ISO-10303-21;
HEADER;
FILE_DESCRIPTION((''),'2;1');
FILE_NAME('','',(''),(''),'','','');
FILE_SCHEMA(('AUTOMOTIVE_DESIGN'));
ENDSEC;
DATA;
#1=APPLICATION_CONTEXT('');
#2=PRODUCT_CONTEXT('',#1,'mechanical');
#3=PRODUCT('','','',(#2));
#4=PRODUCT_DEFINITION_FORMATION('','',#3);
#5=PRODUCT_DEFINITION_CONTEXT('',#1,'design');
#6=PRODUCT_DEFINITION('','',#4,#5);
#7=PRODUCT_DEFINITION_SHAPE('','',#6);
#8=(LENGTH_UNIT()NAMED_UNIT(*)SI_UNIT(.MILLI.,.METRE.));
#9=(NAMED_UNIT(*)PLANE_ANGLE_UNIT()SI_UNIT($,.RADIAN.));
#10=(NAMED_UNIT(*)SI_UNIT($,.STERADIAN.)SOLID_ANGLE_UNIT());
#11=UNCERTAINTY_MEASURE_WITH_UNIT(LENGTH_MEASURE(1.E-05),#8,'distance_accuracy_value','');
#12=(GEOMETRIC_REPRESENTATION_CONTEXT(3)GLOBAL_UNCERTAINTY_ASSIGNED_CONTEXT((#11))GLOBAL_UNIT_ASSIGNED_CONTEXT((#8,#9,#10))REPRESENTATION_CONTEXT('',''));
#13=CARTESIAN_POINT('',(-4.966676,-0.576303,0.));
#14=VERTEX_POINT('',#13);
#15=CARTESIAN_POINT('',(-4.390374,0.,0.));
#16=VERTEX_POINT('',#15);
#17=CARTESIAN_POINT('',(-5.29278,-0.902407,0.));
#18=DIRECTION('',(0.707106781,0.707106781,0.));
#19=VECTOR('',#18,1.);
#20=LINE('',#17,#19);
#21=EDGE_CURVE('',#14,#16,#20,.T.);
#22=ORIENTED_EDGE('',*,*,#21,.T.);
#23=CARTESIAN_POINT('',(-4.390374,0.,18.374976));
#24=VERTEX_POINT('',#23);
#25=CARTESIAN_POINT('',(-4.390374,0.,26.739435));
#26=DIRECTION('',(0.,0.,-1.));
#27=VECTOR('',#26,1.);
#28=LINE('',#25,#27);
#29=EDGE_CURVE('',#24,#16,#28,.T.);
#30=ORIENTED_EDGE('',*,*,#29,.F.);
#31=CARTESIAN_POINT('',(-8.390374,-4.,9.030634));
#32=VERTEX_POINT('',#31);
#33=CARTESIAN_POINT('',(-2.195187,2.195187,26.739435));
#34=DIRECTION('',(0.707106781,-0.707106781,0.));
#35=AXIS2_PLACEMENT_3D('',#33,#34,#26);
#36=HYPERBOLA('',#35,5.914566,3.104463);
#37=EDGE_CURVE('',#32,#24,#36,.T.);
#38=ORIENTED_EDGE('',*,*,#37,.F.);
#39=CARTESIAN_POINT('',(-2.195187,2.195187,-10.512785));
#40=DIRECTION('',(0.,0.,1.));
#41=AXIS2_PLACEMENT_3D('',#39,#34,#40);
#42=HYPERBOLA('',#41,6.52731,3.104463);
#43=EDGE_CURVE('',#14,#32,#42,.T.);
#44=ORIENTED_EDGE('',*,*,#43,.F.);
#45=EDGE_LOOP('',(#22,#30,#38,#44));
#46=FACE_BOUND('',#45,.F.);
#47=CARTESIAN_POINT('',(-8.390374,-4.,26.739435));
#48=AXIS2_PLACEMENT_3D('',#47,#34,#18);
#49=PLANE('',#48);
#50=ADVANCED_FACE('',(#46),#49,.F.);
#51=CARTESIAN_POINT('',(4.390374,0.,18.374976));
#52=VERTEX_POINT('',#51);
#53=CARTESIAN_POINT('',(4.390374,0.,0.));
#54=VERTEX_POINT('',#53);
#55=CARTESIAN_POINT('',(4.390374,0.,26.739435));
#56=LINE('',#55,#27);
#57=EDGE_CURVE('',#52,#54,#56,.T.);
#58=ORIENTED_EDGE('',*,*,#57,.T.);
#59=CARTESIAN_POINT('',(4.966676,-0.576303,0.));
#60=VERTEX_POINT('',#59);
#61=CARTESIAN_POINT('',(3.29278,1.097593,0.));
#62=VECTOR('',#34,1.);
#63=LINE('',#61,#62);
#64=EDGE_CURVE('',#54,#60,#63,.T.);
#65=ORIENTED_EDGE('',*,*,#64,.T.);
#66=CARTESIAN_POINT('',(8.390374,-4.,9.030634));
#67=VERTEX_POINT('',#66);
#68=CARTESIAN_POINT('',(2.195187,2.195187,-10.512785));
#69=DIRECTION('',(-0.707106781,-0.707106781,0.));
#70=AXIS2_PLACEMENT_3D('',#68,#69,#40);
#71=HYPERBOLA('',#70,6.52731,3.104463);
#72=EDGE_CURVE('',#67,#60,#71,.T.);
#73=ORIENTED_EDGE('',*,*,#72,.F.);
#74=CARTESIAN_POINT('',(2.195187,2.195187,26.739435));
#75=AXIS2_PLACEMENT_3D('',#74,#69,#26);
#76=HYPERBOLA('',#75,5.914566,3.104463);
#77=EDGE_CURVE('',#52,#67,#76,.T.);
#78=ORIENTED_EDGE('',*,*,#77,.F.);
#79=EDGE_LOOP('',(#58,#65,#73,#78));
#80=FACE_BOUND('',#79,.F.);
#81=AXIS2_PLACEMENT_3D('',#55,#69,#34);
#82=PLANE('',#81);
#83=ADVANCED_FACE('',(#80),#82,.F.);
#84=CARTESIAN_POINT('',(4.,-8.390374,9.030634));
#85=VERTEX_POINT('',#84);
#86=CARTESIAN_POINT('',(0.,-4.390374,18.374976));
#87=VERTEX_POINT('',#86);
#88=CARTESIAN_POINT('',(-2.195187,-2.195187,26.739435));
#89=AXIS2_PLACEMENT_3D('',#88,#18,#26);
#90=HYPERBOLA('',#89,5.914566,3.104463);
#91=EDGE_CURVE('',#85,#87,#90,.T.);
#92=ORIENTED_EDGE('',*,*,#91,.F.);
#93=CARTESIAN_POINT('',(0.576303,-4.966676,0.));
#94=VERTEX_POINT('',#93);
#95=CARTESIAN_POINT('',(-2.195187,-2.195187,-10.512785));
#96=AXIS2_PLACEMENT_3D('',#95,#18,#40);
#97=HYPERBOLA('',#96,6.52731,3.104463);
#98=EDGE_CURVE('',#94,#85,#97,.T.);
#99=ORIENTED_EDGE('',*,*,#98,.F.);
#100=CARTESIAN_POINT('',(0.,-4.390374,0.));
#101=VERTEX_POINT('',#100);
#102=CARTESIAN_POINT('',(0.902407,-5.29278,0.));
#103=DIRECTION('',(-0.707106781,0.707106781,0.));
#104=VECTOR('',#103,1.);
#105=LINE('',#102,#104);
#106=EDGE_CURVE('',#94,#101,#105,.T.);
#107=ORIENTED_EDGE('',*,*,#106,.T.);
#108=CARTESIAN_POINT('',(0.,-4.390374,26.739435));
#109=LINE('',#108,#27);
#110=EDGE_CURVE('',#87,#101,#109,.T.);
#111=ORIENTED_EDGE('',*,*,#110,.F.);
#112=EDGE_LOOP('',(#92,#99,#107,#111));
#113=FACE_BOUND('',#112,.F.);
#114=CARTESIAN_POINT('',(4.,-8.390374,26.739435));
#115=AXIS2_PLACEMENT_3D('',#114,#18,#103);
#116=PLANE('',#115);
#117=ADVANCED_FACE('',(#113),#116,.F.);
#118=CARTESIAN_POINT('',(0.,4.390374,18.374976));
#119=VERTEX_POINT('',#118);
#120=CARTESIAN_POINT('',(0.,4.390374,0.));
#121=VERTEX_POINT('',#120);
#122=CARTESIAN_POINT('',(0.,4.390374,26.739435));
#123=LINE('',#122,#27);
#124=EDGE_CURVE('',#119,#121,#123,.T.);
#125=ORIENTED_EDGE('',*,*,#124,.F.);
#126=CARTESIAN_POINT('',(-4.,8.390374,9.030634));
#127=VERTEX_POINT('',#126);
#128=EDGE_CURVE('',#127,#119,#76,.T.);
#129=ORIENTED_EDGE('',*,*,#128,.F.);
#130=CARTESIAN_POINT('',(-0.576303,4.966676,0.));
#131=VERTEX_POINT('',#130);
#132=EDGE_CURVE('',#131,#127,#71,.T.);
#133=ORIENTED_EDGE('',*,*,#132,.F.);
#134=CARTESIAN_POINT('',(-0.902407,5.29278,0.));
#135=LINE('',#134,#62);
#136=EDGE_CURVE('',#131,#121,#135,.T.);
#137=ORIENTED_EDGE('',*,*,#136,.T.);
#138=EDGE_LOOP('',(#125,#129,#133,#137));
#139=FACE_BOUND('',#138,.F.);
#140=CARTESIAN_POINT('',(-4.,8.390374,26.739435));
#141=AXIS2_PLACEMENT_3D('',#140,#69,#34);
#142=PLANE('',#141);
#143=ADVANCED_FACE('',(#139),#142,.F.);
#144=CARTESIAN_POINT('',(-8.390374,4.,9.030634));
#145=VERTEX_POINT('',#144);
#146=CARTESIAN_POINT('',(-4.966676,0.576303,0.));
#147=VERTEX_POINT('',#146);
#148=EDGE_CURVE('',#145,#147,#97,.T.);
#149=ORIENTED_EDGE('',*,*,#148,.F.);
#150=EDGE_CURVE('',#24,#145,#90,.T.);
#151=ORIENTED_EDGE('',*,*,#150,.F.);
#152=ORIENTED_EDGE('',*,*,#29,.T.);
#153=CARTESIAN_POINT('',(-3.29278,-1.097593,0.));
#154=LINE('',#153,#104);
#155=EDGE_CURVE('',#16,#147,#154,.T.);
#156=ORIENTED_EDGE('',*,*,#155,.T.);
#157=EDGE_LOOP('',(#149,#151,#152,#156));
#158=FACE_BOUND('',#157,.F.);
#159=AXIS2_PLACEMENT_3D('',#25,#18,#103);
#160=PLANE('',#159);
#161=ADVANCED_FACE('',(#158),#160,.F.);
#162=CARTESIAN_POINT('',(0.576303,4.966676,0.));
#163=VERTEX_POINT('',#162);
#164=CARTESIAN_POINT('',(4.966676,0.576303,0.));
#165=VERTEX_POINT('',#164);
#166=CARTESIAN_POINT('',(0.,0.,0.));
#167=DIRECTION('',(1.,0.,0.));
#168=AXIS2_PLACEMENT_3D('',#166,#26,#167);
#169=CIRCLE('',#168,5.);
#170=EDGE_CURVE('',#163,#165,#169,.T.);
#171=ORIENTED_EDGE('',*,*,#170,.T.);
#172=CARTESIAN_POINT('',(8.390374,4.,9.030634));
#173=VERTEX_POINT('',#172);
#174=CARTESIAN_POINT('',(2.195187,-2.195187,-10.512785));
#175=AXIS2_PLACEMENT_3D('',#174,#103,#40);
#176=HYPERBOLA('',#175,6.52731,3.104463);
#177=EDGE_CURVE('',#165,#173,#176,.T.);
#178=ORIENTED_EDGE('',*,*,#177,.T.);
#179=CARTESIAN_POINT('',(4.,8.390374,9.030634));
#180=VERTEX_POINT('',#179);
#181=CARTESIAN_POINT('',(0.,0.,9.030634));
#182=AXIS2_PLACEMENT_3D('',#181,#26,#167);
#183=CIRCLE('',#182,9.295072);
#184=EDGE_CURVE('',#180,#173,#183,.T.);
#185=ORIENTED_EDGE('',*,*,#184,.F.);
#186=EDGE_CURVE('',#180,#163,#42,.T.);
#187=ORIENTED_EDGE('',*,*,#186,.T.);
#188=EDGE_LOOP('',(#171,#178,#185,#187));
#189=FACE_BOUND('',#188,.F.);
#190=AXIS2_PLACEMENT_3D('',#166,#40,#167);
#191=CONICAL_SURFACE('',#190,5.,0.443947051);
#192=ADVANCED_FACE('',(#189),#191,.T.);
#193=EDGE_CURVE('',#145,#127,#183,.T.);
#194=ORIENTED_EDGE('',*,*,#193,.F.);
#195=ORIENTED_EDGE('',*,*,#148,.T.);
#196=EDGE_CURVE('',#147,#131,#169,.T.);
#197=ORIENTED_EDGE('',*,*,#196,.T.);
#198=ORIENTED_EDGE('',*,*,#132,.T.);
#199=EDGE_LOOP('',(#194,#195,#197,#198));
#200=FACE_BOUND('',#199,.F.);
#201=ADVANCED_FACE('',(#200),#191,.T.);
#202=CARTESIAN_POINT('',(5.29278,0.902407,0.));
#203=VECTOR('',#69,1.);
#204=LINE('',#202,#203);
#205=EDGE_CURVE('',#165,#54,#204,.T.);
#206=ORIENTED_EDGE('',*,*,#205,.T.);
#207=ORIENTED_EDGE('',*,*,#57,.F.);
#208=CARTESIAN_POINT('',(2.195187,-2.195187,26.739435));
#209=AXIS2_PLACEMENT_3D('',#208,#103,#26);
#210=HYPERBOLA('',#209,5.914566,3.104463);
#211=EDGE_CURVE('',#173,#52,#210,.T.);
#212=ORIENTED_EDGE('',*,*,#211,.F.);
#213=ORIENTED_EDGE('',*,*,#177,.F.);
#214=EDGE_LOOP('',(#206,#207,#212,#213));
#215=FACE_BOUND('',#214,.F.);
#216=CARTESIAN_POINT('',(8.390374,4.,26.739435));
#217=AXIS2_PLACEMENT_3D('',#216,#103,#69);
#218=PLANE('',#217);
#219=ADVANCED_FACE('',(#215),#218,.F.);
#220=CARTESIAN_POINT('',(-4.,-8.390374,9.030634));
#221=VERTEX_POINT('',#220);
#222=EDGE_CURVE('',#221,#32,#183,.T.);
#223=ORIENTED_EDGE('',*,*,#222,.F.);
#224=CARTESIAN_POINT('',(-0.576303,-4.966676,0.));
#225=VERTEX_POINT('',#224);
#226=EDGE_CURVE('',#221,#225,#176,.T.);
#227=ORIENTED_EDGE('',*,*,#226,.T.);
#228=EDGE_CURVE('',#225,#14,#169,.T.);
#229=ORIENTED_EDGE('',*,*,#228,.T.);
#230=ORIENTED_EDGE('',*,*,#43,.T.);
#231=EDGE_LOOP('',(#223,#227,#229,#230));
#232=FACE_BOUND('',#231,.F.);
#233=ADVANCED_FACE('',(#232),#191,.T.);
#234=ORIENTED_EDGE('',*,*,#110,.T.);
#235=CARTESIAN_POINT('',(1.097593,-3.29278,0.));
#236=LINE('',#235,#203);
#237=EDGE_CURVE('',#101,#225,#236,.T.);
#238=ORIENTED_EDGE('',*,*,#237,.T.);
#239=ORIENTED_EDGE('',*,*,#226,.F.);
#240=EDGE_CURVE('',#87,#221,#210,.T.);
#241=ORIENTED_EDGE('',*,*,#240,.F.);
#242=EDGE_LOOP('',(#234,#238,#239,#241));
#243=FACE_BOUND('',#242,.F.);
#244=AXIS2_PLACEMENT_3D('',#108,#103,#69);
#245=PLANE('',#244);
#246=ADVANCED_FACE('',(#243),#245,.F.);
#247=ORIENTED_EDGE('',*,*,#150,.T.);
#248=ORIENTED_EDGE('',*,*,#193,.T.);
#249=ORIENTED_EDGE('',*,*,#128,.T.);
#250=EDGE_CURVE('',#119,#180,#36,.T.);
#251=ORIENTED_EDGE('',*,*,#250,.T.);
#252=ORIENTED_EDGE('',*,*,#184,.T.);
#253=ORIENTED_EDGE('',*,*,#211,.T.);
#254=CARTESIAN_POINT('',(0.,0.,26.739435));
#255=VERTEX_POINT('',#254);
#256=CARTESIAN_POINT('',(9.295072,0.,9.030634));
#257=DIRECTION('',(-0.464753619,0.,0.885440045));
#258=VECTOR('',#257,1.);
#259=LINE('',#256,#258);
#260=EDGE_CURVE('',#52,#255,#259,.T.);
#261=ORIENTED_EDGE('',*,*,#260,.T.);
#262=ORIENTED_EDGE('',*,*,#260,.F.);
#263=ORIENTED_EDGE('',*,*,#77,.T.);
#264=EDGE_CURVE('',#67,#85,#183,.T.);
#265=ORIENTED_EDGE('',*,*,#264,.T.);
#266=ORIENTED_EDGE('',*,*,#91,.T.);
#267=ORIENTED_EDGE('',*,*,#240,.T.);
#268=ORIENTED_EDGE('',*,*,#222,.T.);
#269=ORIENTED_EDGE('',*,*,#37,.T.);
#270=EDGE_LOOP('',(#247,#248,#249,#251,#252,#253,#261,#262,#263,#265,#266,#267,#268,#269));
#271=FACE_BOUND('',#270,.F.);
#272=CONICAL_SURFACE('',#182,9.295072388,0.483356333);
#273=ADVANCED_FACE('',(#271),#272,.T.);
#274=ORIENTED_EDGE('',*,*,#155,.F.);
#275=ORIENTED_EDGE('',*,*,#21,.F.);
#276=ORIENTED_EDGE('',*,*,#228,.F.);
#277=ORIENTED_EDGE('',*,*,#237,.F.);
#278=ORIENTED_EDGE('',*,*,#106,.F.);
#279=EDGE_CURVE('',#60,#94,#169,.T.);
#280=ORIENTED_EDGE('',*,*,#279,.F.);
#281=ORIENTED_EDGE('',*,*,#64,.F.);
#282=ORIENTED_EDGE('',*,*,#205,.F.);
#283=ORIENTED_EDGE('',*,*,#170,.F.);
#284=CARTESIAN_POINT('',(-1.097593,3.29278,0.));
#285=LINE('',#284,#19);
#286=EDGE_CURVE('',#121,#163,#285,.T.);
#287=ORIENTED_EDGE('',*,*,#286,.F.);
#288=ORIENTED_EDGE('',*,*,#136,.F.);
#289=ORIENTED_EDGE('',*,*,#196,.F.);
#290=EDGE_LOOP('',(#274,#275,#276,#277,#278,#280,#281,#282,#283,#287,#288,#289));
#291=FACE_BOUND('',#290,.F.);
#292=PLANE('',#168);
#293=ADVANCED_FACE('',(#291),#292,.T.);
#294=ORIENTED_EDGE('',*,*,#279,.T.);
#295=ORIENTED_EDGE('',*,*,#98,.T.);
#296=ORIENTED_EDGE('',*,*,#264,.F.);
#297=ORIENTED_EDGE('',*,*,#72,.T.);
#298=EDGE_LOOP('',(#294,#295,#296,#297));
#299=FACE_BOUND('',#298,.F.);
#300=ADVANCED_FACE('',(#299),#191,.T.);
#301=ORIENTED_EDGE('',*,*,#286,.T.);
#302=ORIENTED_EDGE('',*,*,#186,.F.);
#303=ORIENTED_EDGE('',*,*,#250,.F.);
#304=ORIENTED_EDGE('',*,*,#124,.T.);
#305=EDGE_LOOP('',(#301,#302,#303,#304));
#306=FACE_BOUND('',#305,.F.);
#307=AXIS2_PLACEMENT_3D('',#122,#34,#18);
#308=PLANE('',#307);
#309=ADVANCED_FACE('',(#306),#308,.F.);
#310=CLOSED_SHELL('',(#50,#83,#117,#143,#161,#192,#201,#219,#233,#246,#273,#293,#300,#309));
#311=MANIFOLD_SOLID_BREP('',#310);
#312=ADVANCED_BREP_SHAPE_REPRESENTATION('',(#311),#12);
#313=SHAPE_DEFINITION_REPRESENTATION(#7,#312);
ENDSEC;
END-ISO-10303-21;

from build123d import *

# Parameters (mm, degrees)
F4_DEPTH = 26.7404350513


with BuildPart() as f1:
    # F0 (on Front) → F1 (revolve)
    with BuildSketch(Plane.XZ):
        Polygon((5, 0), (9.295072388, 9.0306341517), (0, 26.7394350513), (0, 0), align=None)
    revolve(axis=Axis((0, 0, -4.4079385259), (0, 0, -1)))

    # F3 (on face) → F4 (cut, through all)
    with BuildSketch(Plane.XY.offset(26.7394350513)):
        with BuildLine():
            ThreePointArc((9.295072388, 0), (9.0660769225, 2.0505169915), (8.3903736924, 4))
            Line((8.3903736924, 4), (4.3903736924, 0))
            Line((4.3903736924, 0), (8.3903736924, -4))
            ThreePointArc((8.3903736924, -4), (9.0660769225, -2.0505169915), (9.295072388, 0))
        make_face()
        with BuildLine():
            ThreePointArc((4, 8.3903736924), (0, 9.295072388), (-4, 8.3903736924))
            Line((-4, 8.3903736924), (0, 4.3903736924))
            Line((0, 4.3903736924), (4, 8.3903736924))
        make_face()
        with BuildLine():
            Line((-4.3903736924, 0), (-8.3903736924, 4))
            ThreePointArc((-8.3903736924, 4), (-9.295072388, 0), (-8.3903736924, -4))
            Line((-8.3903736924, -4), (-4.3903736924, 0))
        make_face()
        with BuildLine():
            Line((0, -4.3903736924), (-4, -8.3903736924))
            ThreePointArc((-4, -8.3903736924), (0, -9.295072388), (4, -8.3903736924))
            Line((4, -8.3903736924), (0, -4.3903736924))
        make_face()
    extrude(amount=-F4_DEPTH, mode=Mode.SUBTRACT)


solid = f1.part
